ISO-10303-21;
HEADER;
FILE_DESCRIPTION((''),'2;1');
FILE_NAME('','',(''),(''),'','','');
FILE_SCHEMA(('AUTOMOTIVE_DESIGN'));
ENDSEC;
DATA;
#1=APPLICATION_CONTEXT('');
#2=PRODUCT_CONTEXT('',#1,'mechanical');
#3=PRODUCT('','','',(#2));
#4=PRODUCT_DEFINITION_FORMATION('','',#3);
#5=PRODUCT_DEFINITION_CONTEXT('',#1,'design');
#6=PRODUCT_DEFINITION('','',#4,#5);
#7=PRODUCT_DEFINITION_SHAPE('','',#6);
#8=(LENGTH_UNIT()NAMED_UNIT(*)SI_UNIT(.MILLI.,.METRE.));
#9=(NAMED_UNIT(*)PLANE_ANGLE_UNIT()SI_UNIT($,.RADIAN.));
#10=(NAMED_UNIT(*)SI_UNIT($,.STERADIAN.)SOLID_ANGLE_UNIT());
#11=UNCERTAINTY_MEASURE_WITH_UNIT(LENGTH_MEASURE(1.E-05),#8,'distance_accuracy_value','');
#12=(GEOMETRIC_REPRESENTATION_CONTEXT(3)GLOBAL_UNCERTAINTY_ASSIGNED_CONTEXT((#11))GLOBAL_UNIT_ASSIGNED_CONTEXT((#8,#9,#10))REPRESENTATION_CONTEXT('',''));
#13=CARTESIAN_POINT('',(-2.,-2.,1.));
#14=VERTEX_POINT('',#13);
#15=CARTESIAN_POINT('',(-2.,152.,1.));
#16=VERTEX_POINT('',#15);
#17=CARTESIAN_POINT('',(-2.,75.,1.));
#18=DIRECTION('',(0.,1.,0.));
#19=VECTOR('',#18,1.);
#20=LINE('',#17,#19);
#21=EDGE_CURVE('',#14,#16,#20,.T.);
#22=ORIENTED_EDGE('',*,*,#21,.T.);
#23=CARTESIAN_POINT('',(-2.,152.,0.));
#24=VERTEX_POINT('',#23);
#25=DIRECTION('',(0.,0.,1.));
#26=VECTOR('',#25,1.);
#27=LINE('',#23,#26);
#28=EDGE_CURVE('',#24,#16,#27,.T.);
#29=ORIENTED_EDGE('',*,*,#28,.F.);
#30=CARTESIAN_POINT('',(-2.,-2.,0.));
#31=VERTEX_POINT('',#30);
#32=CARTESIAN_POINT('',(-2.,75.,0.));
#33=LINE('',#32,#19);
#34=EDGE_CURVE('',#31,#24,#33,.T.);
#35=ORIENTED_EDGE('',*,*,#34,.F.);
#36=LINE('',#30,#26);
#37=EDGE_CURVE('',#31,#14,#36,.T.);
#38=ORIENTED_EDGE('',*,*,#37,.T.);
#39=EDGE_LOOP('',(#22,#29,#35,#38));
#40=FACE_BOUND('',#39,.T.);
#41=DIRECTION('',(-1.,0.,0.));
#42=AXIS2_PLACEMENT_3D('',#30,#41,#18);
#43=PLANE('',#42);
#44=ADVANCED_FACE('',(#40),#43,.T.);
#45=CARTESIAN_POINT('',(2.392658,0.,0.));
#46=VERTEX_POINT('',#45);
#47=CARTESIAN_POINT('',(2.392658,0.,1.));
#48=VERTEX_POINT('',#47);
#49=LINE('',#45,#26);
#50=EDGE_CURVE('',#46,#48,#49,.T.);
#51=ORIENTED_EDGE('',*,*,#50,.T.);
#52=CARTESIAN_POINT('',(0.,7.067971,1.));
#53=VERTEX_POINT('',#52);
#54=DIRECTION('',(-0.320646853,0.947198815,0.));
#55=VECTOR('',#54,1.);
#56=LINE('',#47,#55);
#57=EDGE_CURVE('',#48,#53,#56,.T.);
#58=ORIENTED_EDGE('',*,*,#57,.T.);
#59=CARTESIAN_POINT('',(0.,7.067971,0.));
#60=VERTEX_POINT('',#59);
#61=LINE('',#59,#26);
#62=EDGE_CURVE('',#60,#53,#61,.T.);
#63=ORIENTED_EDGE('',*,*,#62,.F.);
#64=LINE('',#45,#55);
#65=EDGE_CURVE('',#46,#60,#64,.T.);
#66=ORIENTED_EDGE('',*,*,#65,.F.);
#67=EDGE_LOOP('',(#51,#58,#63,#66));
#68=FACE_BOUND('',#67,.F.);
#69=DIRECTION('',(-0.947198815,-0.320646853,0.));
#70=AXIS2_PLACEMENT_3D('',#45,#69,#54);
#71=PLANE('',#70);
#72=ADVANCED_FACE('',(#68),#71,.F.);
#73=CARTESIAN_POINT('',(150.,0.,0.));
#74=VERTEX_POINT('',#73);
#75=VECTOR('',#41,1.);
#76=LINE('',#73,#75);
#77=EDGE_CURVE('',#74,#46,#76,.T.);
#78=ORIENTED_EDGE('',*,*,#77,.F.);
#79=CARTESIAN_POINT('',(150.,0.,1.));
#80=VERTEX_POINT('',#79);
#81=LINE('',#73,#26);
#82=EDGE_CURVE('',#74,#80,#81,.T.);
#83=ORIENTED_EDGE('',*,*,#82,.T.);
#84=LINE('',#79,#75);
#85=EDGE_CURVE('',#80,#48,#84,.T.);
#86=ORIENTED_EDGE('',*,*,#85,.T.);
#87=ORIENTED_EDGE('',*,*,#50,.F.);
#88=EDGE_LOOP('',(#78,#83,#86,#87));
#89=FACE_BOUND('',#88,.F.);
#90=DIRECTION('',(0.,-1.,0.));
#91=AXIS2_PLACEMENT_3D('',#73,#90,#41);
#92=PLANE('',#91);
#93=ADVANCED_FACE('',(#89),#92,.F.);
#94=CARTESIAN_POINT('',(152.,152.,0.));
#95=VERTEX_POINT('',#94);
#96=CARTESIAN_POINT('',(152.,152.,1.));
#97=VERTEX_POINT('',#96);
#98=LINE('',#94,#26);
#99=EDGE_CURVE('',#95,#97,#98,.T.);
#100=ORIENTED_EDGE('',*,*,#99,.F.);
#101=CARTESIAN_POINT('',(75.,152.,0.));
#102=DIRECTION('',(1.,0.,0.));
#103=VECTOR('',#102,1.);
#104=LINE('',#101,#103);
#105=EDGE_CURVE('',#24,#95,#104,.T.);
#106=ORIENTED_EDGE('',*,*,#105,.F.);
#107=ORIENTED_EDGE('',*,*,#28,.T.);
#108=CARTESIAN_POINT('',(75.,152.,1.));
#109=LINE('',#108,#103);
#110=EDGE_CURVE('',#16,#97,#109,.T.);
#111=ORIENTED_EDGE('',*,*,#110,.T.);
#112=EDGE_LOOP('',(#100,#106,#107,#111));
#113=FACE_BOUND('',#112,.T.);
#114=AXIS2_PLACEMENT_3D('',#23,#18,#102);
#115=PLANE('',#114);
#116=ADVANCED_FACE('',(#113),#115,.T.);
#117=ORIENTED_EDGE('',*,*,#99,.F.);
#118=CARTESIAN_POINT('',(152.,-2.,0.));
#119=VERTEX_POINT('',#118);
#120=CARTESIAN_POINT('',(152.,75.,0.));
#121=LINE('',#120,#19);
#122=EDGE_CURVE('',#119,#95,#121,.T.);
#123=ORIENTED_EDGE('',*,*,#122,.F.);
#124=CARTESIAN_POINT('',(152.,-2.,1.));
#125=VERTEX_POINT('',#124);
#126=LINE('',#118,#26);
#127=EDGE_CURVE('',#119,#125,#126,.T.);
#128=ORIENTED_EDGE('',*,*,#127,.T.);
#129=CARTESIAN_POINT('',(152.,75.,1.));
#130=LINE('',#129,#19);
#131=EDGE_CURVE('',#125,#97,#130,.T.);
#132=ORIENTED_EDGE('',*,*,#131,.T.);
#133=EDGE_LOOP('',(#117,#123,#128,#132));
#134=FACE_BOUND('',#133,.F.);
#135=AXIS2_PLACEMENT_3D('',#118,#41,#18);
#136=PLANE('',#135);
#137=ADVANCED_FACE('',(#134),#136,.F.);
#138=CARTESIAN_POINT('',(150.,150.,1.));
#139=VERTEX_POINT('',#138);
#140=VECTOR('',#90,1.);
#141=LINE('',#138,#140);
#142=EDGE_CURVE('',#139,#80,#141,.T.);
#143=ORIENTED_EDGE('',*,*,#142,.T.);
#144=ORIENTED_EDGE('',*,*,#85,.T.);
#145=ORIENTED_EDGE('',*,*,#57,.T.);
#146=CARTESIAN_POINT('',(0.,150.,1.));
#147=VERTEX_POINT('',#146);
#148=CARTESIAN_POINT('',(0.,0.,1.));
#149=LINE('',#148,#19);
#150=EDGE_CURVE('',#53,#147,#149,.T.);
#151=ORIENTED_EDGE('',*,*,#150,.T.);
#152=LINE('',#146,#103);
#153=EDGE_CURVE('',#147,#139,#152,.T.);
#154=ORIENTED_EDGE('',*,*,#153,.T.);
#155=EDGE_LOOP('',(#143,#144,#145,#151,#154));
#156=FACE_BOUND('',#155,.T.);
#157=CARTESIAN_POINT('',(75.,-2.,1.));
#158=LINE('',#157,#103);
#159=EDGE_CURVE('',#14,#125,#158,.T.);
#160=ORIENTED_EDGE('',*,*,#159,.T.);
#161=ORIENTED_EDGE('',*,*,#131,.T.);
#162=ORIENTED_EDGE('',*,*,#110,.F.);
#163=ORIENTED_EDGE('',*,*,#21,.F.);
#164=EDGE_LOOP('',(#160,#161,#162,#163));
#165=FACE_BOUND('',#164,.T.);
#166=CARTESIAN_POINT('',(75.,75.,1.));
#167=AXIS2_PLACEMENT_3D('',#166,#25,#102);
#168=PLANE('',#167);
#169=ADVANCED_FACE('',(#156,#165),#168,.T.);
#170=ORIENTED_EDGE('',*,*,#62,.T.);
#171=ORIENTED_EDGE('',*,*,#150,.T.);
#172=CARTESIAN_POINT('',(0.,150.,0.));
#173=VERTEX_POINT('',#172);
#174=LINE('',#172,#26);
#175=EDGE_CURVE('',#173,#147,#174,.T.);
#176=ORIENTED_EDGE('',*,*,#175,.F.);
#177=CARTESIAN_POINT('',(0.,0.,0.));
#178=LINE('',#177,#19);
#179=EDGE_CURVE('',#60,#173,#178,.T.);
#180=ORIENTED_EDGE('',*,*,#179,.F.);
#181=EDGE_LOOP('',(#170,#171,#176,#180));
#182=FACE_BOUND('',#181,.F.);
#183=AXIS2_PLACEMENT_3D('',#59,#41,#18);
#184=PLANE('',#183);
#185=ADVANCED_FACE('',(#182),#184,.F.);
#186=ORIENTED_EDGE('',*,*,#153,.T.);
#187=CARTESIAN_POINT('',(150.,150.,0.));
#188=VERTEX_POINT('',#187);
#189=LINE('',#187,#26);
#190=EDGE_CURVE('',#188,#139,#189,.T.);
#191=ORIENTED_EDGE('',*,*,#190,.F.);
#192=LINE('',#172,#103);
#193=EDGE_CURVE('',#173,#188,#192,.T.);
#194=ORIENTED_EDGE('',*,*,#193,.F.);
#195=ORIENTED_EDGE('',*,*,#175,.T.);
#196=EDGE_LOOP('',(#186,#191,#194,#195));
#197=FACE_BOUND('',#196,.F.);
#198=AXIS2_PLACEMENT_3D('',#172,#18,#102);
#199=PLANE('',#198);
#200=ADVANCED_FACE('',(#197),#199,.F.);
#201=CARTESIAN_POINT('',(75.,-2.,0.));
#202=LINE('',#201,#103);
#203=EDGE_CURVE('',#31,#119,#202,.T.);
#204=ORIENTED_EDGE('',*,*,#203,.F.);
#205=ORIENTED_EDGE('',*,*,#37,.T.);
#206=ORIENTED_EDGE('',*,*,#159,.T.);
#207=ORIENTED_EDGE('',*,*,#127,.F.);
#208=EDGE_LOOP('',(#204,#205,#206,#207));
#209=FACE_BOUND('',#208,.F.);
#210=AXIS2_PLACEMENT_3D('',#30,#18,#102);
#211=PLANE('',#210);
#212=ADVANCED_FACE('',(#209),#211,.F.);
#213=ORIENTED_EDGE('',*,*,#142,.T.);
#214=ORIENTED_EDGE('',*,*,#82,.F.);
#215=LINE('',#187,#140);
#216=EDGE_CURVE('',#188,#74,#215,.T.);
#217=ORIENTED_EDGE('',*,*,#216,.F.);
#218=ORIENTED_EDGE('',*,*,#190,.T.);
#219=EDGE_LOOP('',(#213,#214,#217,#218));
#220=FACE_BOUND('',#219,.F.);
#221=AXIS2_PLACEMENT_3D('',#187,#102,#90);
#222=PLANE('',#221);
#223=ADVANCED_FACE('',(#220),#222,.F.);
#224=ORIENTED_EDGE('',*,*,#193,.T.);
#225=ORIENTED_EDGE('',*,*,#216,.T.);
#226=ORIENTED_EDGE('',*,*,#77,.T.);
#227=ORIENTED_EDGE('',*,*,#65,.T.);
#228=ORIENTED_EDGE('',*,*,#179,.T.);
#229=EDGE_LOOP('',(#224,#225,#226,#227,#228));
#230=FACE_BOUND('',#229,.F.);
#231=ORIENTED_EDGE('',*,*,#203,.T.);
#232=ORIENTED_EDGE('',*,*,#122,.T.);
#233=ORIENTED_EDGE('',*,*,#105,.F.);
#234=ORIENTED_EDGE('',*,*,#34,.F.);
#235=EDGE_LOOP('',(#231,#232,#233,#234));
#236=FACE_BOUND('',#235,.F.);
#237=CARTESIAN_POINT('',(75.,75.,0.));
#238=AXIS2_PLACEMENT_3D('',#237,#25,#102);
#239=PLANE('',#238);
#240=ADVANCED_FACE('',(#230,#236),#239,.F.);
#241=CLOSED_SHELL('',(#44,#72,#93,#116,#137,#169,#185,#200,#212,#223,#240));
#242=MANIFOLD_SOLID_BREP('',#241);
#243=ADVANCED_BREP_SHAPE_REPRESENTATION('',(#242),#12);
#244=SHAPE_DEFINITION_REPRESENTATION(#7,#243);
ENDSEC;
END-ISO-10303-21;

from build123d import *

# Parameters (mm, degrees)
F0_W     = 154
F0_H     = 154
F1_DEPTH = 1


# Not quite as in the source:
# - a feature names something its author has since deleted; it is built from what else it names


with BuildPart() as f1:
    # F0 (on Top) → F1 (new body)
    with BuildSketch(Plane.XY):
        with Locations((75, 75)):
            Rectangle(F0_W, F0_H)
        Polygon((2.3926577996, 0), (0, 0), (0, 7.0679709315), (0, 150), (150, 150), (150, 0), align=None, mode=Mode.SUBTRACT)
        Polygon((0, 7.0679709315), (0, 0), (2.3926577996, 0), align=None)
    extrude(amount=F1_DEPTH)


solid = f1.part
